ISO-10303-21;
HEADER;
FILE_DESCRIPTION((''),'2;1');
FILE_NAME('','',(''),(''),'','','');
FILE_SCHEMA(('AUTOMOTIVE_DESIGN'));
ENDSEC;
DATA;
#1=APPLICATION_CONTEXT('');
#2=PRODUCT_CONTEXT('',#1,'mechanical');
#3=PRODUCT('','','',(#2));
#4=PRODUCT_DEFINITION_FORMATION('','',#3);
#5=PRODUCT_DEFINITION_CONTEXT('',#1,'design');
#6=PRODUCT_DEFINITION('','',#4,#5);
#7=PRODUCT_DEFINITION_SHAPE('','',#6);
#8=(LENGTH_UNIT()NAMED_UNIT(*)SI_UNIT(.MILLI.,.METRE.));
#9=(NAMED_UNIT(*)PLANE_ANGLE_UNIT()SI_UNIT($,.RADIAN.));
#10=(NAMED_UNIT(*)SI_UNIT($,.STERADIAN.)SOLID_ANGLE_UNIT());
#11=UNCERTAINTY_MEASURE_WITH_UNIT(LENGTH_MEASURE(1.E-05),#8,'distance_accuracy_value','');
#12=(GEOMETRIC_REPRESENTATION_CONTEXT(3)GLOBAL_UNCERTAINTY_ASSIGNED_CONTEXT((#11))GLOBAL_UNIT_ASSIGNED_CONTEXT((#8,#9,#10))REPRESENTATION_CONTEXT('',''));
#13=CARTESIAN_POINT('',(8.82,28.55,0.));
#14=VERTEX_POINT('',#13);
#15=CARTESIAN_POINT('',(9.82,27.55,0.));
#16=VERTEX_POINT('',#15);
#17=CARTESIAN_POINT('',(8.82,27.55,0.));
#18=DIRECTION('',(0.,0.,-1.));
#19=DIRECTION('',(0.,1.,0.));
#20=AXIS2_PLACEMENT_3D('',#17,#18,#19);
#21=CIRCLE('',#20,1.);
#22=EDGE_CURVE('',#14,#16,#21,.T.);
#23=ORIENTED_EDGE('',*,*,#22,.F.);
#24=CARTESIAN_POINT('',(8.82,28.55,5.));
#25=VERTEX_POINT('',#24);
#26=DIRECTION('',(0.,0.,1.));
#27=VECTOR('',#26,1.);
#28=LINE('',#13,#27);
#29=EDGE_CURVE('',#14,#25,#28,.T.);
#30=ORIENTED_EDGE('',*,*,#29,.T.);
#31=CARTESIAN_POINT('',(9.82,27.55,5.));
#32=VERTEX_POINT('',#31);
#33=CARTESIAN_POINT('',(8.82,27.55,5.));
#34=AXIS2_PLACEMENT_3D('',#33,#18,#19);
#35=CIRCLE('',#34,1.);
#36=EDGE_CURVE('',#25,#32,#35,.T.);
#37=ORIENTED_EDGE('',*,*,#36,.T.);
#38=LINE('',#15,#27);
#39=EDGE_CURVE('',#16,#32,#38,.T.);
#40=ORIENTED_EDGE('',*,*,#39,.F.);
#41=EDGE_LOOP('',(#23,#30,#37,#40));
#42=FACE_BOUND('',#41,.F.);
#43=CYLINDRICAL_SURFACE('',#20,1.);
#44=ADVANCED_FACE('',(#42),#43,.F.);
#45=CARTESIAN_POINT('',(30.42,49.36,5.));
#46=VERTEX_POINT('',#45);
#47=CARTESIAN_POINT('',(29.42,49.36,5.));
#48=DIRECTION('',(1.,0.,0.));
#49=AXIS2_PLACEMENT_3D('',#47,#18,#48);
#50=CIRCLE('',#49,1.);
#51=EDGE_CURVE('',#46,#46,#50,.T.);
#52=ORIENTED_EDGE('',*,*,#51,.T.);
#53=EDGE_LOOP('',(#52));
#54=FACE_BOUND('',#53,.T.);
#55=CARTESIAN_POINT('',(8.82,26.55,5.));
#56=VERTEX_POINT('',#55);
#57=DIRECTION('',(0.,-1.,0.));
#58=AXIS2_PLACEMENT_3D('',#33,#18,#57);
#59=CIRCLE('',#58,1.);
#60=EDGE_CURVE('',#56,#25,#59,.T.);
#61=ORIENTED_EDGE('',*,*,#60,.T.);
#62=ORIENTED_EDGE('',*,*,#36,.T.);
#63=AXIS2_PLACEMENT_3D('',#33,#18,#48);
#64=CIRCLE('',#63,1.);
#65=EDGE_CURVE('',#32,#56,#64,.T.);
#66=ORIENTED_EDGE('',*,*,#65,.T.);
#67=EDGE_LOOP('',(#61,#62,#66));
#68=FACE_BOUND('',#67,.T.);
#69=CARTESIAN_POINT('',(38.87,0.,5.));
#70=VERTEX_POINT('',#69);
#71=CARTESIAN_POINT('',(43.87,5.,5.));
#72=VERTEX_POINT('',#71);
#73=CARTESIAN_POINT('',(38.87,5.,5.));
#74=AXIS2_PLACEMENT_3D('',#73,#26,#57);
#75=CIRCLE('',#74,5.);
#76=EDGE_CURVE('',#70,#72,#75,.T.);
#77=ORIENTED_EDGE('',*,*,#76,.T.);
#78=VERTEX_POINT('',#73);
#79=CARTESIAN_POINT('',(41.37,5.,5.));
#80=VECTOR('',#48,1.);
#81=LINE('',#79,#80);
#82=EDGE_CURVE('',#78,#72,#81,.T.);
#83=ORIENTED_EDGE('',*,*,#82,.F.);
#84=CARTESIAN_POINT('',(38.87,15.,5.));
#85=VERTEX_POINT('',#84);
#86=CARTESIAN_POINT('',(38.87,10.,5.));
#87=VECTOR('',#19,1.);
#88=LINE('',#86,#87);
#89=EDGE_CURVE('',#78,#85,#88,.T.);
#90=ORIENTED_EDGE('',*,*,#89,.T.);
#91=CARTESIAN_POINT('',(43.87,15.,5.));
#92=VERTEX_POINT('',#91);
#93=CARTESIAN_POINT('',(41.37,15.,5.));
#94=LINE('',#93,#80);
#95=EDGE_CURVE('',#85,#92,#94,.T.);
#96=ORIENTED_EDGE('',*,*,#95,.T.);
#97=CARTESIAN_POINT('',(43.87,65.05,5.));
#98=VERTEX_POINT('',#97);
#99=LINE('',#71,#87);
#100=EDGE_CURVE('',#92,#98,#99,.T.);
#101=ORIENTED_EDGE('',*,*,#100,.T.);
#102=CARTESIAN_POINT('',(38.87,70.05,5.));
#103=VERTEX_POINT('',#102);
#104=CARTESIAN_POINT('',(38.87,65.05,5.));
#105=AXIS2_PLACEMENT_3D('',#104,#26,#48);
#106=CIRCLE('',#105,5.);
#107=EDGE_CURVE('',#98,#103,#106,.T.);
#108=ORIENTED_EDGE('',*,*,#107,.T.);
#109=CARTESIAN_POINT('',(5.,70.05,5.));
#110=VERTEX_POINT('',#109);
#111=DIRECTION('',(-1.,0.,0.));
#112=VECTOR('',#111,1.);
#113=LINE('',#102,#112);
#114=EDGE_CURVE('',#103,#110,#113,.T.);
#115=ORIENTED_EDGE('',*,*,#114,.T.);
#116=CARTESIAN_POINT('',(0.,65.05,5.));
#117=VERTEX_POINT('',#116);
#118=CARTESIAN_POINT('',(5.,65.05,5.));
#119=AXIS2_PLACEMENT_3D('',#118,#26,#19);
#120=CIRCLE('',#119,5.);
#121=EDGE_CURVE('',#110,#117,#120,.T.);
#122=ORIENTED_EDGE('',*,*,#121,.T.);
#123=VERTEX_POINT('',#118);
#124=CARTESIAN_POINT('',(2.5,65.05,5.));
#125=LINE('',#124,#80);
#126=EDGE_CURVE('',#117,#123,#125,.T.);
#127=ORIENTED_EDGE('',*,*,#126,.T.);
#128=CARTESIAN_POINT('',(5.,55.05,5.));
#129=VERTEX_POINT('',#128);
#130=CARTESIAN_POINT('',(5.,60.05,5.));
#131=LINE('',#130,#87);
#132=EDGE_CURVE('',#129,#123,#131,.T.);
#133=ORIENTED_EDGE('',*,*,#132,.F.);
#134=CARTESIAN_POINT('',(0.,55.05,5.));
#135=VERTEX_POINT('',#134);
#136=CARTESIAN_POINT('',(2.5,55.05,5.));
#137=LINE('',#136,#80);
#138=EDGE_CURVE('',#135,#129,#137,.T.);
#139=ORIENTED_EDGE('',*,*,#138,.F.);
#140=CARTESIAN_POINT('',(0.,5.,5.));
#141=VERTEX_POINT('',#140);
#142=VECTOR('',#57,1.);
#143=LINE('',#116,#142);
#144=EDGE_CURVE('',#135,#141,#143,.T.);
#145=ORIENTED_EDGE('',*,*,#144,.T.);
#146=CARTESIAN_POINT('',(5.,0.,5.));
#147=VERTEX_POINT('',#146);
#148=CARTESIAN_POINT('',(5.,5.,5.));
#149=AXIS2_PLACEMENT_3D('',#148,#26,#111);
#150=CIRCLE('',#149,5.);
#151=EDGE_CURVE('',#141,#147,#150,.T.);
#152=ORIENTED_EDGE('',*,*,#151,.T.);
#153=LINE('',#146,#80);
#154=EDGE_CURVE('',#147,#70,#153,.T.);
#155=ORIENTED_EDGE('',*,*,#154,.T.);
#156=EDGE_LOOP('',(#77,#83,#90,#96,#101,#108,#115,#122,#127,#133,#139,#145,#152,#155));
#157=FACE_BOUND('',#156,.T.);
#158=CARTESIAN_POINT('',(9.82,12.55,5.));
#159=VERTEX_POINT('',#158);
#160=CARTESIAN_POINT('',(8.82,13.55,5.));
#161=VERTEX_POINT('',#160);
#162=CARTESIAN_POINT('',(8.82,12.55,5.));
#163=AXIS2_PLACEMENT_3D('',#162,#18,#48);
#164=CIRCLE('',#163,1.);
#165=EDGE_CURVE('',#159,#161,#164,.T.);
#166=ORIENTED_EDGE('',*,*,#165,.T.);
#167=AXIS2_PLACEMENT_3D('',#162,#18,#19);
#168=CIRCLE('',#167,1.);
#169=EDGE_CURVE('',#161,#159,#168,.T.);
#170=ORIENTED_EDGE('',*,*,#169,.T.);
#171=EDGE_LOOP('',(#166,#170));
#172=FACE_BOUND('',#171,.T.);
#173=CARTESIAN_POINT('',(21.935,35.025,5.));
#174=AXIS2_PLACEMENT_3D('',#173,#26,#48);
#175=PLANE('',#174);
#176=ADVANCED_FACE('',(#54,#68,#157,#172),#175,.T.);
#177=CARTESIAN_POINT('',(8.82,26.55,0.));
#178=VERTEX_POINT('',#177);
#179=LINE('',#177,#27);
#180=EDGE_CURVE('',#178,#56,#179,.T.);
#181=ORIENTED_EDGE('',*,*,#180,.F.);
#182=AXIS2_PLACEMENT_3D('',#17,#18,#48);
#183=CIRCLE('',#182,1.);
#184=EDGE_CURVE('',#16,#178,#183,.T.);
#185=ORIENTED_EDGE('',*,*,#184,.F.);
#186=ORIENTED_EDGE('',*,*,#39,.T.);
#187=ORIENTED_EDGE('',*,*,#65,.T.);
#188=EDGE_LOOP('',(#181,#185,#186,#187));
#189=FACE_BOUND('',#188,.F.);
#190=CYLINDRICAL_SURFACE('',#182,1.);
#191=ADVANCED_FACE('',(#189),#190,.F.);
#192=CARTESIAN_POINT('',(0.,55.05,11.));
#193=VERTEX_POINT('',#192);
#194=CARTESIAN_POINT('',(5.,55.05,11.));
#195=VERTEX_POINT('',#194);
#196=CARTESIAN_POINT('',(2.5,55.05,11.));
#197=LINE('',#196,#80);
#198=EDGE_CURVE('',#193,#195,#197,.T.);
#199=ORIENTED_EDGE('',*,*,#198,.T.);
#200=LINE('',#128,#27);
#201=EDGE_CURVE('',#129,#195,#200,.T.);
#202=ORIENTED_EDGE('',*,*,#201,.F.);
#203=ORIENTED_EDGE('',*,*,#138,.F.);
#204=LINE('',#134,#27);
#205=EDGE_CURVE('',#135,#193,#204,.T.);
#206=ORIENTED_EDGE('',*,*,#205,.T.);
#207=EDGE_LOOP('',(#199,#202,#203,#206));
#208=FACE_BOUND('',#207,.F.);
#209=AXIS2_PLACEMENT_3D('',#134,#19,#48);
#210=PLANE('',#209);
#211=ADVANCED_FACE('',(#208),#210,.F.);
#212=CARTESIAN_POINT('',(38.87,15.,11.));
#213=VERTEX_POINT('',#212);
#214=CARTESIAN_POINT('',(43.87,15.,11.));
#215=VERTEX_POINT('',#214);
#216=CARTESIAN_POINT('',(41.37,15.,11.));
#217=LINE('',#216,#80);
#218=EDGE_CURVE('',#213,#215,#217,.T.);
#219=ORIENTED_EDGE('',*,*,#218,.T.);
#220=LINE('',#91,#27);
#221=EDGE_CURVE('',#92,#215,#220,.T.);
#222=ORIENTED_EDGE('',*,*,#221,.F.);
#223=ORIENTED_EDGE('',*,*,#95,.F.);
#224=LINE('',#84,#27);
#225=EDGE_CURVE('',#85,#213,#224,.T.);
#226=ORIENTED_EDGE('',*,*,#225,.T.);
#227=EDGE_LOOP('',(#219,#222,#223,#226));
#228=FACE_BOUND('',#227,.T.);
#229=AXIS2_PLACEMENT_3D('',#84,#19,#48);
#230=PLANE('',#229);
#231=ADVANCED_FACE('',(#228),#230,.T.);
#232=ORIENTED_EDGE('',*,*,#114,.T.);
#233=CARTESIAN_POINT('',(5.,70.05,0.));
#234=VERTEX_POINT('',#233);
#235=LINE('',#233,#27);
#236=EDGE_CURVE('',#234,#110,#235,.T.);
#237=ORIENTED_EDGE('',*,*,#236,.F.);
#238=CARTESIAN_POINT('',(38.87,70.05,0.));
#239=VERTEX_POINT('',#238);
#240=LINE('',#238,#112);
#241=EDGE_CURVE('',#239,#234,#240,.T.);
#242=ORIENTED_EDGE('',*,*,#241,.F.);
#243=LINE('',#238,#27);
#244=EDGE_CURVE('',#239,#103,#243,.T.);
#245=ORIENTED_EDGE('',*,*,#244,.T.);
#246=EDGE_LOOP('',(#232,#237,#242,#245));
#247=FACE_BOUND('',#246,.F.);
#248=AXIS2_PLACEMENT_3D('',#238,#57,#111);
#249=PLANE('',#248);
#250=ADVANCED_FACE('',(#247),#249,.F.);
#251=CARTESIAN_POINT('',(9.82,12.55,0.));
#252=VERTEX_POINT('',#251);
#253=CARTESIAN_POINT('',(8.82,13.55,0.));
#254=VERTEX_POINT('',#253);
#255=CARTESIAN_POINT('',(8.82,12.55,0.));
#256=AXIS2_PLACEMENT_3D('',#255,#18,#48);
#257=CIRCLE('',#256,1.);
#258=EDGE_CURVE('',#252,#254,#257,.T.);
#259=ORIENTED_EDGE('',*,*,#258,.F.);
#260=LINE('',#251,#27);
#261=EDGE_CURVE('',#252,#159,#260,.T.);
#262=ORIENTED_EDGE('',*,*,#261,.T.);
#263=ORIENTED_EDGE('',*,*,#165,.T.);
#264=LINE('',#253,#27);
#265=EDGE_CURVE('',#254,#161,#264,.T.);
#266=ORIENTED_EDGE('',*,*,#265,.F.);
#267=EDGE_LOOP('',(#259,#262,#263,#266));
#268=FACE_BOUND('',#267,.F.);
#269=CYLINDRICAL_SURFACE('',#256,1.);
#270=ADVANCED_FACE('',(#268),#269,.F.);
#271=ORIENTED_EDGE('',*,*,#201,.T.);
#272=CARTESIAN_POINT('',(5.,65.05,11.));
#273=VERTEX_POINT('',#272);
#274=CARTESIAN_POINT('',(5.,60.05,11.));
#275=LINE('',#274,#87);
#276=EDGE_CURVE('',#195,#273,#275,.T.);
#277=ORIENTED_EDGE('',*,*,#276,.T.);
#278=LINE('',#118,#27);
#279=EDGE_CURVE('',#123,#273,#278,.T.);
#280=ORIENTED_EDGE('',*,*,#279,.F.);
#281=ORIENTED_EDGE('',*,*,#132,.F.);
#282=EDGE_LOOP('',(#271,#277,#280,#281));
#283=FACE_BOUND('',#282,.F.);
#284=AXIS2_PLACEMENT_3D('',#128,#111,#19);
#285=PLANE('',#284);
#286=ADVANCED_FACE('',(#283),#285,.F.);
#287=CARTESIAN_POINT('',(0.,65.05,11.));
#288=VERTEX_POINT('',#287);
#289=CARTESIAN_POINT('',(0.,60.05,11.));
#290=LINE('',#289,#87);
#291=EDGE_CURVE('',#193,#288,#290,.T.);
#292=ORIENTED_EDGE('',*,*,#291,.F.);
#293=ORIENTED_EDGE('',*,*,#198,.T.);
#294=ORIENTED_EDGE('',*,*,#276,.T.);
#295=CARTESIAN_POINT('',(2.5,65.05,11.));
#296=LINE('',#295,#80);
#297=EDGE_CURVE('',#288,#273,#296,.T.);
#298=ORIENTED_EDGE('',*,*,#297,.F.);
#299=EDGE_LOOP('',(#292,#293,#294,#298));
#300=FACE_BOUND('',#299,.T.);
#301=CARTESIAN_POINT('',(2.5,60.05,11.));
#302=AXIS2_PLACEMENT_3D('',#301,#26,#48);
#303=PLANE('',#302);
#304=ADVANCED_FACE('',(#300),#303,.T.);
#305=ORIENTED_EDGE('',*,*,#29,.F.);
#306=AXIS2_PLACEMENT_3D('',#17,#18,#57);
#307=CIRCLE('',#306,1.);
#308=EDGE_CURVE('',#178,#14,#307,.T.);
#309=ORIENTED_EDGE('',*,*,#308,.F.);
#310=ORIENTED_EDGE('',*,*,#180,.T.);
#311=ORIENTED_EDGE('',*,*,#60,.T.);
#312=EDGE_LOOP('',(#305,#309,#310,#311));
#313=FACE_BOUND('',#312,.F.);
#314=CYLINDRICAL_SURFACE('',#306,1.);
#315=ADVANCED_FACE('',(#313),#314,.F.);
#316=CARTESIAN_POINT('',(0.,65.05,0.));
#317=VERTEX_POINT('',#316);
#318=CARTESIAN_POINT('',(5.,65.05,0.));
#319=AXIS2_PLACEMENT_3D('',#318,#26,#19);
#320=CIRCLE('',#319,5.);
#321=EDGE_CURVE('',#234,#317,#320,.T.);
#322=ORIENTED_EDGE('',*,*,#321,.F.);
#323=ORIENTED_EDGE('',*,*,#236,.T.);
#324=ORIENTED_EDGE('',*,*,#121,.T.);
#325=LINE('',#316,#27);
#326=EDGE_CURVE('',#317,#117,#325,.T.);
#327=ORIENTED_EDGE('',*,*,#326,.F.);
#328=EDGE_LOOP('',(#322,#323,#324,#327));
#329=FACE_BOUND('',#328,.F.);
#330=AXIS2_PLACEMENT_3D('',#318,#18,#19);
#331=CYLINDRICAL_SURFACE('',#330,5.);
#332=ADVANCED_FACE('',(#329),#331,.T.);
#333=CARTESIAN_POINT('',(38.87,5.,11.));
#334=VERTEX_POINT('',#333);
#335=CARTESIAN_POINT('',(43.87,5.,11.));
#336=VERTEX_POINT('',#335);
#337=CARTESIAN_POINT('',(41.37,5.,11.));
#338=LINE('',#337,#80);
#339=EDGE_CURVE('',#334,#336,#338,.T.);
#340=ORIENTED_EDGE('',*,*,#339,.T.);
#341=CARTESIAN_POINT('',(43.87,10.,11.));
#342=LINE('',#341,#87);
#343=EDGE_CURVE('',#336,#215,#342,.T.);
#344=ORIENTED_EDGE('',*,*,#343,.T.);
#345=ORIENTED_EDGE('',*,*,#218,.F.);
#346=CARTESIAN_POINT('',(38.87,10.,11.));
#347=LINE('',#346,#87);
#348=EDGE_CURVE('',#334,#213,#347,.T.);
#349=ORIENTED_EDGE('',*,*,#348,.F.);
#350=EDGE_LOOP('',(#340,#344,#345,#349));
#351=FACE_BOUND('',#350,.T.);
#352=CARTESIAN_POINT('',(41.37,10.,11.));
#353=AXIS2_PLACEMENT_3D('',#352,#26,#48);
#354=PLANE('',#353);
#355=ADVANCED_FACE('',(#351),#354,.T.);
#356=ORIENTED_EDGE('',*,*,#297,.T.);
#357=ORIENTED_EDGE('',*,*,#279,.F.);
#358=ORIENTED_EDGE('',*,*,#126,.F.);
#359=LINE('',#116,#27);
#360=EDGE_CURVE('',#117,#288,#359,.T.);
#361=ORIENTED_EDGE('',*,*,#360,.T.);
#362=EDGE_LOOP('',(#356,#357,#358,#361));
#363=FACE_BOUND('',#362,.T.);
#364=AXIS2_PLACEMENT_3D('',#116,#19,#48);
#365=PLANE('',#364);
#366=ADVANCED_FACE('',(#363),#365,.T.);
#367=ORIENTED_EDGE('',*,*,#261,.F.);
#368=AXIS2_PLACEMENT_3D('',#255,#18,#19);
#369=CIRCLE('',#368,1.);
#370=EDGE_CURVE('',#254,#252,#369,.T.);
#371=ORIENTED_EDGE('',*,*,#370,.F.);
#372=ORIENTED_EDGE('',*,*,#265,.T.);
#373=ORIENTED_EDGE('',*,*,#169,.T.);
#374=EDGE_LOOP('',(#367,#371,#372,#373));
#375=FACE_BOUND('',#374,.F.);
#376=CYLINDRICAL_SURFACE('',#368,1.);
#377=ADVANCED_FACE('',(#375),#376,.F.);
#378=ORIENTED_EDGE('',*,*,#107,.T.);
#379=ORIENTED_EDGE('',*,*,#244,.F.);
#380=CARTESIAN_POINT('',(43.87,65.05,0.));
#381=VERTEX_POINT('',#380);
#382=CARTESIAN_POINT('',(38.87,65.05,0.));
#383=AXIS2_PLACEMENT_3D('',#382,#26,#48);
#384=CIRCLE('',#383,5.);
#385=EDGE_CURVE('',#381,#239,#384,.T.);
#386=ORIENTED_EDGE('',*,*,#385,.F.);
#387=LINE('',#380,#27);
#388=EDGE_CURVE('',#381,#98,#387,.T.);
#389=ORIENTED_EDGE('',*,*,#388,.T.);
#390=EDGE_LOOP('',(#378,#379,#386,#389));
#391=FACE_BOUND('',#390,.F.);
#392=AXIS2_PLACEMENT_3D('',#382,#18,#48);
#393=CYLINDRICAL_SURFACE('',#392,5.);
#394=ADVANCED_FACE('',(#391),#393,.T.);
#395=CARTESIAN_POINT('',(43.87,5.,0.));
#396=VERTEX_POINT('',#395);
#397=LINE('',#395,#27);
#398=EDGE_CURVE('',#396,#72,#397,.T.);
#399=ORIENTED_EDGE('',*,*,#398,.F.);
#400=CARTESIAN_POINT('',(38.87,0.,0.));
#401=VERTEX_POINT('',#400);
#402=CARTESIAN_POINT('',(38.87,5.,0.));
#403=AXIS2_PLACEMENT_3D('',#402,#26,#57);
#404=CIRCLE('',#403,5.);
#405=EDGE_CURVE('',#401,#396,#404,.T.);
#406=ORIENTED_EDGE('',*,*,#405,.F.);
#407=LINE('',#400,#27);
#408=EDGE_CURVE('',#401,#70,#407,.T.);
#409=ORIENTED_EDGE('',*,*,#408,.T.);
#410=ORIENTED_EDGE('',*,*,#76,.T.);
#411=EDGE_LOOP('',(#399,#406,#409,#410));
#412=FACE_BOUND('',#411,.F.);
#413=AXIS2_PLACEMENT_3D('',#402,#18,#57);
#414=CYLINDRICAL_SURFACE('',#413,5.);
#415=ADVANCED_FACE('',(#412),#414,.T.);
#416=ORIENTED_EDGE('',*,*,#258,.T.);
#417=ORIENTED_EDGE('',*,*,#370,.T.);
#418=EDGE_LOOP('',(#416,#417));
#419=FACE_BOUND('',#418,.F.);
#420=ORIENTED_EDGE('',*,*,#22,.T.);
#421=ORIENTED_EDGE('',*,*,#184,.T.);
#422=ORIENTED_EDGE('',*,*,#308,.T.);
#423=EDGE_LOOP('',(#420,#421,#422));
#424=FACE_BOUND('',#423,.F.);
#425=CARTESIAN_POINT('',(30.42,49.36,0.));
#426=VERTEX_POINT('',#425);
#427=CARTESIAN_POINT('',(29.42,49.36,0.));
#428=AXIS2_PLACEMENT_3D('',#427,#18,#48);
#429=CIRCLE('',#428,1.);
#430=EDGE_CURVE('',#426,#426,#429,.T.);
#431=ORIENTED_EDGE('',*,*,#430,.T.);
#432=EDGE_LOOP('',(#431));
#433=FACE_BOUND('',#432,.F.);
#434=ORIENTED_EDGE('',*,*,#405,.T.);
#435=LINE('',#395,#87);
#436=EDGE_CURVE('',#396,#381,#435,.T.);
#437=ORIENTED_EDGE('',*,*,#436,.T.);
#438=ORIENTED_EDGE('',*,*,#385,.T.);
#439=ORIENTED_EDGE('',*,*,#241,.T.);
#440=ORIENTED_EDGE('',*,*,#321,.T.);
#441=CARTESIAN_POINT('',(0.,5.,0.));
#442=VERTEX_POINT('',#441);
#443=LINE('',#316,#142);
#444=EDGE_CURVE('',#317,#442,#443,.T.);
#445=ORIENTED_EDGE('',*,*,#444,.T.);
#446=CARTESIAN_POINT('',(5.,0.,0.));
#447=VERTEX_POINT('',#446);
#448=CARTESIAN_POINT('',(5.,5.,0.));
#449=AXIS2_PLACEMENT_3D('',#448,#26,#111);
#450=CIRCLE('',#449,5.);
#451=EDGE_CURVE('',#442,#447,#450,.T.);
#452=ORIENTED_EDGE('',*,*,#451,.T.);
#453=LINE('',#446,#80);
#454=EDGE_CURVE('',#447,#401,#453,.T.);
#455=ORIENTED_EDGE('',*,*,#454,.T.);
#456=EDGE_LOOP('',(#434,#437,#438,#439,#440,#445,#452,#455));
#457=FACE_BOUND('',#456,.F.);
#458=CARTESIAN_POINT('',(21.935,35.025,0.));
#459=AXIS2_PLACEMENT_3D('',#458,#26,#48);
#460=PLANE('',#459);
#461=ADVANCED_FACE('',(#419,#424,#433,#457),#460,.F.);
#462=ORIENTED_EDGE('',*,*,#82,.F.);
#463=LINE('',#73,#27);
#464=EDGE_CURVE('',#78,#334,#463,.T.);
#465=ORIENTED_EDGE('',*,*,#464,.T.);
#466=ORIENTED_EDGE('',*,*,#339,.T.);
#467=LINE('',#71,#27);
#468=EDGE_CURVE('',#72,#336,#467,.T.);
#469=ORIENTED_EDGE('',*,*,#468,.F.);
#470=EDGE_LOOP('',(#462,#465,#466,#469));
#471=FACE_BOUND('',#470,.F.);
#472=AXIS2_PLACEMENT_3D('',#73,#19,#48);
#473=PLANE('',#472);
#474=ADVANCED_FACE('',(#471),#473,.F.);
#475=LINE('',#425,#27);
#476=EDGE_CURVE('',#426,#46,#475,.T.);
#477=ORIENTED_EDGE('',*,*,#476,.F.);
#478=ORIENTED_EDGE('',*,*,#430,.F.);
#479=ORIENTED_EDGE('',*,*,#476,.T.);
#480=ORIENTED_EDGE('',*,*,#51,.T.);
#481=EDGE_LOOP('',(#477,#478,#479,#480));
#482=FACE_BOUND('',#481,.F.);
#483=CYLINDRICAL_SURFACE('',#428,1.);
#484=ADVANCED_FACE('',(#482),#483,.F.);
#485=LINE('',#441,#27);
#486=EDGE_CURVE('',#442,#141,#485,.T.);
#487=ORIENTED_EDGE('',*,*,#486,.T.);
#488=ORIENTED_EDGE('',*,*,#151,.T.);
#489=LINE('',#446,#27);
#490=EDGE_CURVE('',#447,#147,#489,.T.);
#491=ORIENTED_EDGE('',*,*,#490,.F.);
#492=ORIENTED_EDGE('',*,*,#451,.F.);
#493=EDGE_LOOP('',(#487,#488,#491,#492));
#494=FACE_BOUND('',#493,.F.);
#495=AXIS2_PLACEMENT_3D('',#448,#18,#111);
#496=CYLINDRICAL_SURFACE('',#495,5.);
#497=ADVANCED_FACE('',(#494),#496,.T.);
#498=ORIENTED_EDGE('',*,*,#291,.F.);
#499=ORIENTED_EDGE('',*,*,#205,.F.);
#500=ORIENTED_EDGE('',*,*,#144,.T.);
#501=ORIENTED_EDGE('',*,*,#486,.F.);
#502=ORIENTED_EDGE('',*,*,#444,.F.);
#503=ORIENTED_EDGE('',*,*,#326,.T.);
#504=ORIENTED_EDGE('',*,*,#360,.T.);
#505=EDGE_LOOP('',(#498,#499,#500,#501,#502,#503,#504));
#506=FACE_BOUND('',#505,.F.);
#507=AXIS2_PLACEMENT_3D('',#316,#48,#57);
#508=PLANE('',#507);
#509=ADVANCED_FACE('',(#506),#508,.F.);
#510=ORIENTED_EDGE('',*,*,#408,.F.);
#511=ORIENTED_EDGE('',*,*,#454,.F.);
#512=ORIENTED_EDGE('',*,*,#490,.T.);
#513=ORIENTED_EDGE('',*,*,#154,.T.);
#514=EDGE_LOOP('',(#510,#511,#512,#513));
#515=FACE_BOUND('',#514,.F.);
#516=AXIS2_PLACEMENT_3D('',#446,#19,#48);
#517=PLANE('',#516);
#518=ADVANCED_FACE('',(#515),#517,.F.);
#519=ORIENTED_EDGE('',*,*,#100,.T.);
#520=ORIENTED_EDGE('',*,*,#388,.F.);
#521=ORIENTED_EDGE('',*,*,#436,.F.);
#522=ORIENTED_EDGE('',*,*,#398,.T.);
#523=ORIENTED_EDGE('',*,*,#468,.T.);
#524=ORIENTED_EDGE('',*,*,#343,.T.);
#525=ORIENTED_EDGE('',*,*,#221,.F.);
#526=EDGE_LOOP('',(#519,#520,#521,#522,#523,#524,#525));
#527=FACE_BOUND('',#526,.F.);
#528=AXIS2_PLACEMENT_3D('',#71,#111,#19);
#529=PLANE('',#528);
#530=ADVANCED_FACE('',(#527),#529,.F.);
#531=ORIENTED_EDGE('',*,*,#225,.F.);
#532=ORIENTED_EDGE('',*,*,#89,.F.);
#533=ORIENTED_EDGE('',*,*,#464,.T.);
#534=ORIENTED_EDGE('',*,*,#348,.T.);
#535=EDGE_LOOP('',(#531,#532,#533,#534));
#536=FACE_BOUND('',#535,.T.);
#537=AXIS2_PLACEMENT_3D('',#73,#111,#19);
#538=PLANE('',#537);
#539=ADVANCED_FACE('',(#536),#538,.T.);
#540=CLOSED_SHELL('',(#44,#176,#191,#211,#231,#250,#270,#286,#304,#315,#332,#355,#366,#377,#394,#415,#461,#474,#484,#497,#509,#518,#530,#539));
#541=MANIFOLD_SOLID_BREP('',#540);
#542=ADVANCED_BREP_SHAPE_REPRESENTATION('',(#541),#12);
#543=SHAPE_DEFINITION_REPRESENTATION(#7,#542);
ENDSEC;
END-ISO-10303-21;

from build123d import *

# Parameters (mm, degrees)
F1_DEPTH = 5
F2_W     = 10
F2_H     = 5
F3_DEPTH = 6
F2_W_2   = 5
F2_H_2   = 10


with BuildPart() as f1:
    # F0 (on Top) → F1 (new body)
    with BuildSketch(Plane.XY):
        with BuildLine():
            ThreePointArc((0, 5), (1.4644660941, 1.4644660941), (5, 0))
            Line((5, 0), (38.87, 0))
            ThreePointArc((38.87, 0), (42.4055339059, 1.4644660941), (43.87, 5))
            Line((43.87, 5), (43.87, 49.36))
            Line((43.87, 49.36), (43.87, 65.05))
            ThreePointArc((43.87, 65.05), (42.4055339059, 68.5855339059), (38.87, 70.05))
            Line((38.87, 70.05), (5, 70.05))
            ThreePointArc((5, 70.05), (1.4644660941, 68.5855339059), (0, 65.05))
            Line((0, 65.05), (0, 5))
        make_face()
        with BuildLine():
            ThreePointArc((9.82, 12.55), (8.1128932188, 11.8428932188), (8.82, 13.55))
            ThreePointArc((8.82, 13.55), (9.5271067812, 13.2571067812), (9.82, 12.55))
        make_face(mode=Mode.SUBTRACT)
        with BuildLine():
            ThreePointArc((8.82, 26.55), (7.82, 27.55), (8.82, 28.55))
            ThreePointArc((8.82, 28.55), (9.5271067812, 28.2571067812), (9.82, 27.55))
            ThreePointArc((9.82, 27.55), (9.5271067812, 26.8428932188), (8.82, 26.55))
        make_face(mode=Mode.SUBTRACT)
        with BuildLine():
            ThreePointArc((28.42, 49.36), (29.42, 50.36), (30.42, 49.36))
            ThreePointArc((30.42, 49.36), (29.42, 48.36), (28.42, 49.36))
        make_face(mode=Mode.SUBTRACT)
    extrude(amount=F1_DEPTH)

    # F2 (on face) → F3, piece 2 (join)
    with BuildSketch(Plane.XY.offset(5)):
        with Locations((41.37, 10)):
            Rectangle(F2_W_2, F2_H_2)
        with Locations((2.5, 60.05)):
            Rectangle(F2_W_2, F2_H_2)
    extrude(amount=F3_DEPTH)


with BuildPart() as f3:
    # F2 (on face) → F3 (new body)
    with BuildSketch(Plane.XY.offset(5)):
        with Locations((33.87, 2.5)):
            Rectangle(F2_W, F2_H)
    extrude(amount=F3_DEPTH)


solid = f1.part
